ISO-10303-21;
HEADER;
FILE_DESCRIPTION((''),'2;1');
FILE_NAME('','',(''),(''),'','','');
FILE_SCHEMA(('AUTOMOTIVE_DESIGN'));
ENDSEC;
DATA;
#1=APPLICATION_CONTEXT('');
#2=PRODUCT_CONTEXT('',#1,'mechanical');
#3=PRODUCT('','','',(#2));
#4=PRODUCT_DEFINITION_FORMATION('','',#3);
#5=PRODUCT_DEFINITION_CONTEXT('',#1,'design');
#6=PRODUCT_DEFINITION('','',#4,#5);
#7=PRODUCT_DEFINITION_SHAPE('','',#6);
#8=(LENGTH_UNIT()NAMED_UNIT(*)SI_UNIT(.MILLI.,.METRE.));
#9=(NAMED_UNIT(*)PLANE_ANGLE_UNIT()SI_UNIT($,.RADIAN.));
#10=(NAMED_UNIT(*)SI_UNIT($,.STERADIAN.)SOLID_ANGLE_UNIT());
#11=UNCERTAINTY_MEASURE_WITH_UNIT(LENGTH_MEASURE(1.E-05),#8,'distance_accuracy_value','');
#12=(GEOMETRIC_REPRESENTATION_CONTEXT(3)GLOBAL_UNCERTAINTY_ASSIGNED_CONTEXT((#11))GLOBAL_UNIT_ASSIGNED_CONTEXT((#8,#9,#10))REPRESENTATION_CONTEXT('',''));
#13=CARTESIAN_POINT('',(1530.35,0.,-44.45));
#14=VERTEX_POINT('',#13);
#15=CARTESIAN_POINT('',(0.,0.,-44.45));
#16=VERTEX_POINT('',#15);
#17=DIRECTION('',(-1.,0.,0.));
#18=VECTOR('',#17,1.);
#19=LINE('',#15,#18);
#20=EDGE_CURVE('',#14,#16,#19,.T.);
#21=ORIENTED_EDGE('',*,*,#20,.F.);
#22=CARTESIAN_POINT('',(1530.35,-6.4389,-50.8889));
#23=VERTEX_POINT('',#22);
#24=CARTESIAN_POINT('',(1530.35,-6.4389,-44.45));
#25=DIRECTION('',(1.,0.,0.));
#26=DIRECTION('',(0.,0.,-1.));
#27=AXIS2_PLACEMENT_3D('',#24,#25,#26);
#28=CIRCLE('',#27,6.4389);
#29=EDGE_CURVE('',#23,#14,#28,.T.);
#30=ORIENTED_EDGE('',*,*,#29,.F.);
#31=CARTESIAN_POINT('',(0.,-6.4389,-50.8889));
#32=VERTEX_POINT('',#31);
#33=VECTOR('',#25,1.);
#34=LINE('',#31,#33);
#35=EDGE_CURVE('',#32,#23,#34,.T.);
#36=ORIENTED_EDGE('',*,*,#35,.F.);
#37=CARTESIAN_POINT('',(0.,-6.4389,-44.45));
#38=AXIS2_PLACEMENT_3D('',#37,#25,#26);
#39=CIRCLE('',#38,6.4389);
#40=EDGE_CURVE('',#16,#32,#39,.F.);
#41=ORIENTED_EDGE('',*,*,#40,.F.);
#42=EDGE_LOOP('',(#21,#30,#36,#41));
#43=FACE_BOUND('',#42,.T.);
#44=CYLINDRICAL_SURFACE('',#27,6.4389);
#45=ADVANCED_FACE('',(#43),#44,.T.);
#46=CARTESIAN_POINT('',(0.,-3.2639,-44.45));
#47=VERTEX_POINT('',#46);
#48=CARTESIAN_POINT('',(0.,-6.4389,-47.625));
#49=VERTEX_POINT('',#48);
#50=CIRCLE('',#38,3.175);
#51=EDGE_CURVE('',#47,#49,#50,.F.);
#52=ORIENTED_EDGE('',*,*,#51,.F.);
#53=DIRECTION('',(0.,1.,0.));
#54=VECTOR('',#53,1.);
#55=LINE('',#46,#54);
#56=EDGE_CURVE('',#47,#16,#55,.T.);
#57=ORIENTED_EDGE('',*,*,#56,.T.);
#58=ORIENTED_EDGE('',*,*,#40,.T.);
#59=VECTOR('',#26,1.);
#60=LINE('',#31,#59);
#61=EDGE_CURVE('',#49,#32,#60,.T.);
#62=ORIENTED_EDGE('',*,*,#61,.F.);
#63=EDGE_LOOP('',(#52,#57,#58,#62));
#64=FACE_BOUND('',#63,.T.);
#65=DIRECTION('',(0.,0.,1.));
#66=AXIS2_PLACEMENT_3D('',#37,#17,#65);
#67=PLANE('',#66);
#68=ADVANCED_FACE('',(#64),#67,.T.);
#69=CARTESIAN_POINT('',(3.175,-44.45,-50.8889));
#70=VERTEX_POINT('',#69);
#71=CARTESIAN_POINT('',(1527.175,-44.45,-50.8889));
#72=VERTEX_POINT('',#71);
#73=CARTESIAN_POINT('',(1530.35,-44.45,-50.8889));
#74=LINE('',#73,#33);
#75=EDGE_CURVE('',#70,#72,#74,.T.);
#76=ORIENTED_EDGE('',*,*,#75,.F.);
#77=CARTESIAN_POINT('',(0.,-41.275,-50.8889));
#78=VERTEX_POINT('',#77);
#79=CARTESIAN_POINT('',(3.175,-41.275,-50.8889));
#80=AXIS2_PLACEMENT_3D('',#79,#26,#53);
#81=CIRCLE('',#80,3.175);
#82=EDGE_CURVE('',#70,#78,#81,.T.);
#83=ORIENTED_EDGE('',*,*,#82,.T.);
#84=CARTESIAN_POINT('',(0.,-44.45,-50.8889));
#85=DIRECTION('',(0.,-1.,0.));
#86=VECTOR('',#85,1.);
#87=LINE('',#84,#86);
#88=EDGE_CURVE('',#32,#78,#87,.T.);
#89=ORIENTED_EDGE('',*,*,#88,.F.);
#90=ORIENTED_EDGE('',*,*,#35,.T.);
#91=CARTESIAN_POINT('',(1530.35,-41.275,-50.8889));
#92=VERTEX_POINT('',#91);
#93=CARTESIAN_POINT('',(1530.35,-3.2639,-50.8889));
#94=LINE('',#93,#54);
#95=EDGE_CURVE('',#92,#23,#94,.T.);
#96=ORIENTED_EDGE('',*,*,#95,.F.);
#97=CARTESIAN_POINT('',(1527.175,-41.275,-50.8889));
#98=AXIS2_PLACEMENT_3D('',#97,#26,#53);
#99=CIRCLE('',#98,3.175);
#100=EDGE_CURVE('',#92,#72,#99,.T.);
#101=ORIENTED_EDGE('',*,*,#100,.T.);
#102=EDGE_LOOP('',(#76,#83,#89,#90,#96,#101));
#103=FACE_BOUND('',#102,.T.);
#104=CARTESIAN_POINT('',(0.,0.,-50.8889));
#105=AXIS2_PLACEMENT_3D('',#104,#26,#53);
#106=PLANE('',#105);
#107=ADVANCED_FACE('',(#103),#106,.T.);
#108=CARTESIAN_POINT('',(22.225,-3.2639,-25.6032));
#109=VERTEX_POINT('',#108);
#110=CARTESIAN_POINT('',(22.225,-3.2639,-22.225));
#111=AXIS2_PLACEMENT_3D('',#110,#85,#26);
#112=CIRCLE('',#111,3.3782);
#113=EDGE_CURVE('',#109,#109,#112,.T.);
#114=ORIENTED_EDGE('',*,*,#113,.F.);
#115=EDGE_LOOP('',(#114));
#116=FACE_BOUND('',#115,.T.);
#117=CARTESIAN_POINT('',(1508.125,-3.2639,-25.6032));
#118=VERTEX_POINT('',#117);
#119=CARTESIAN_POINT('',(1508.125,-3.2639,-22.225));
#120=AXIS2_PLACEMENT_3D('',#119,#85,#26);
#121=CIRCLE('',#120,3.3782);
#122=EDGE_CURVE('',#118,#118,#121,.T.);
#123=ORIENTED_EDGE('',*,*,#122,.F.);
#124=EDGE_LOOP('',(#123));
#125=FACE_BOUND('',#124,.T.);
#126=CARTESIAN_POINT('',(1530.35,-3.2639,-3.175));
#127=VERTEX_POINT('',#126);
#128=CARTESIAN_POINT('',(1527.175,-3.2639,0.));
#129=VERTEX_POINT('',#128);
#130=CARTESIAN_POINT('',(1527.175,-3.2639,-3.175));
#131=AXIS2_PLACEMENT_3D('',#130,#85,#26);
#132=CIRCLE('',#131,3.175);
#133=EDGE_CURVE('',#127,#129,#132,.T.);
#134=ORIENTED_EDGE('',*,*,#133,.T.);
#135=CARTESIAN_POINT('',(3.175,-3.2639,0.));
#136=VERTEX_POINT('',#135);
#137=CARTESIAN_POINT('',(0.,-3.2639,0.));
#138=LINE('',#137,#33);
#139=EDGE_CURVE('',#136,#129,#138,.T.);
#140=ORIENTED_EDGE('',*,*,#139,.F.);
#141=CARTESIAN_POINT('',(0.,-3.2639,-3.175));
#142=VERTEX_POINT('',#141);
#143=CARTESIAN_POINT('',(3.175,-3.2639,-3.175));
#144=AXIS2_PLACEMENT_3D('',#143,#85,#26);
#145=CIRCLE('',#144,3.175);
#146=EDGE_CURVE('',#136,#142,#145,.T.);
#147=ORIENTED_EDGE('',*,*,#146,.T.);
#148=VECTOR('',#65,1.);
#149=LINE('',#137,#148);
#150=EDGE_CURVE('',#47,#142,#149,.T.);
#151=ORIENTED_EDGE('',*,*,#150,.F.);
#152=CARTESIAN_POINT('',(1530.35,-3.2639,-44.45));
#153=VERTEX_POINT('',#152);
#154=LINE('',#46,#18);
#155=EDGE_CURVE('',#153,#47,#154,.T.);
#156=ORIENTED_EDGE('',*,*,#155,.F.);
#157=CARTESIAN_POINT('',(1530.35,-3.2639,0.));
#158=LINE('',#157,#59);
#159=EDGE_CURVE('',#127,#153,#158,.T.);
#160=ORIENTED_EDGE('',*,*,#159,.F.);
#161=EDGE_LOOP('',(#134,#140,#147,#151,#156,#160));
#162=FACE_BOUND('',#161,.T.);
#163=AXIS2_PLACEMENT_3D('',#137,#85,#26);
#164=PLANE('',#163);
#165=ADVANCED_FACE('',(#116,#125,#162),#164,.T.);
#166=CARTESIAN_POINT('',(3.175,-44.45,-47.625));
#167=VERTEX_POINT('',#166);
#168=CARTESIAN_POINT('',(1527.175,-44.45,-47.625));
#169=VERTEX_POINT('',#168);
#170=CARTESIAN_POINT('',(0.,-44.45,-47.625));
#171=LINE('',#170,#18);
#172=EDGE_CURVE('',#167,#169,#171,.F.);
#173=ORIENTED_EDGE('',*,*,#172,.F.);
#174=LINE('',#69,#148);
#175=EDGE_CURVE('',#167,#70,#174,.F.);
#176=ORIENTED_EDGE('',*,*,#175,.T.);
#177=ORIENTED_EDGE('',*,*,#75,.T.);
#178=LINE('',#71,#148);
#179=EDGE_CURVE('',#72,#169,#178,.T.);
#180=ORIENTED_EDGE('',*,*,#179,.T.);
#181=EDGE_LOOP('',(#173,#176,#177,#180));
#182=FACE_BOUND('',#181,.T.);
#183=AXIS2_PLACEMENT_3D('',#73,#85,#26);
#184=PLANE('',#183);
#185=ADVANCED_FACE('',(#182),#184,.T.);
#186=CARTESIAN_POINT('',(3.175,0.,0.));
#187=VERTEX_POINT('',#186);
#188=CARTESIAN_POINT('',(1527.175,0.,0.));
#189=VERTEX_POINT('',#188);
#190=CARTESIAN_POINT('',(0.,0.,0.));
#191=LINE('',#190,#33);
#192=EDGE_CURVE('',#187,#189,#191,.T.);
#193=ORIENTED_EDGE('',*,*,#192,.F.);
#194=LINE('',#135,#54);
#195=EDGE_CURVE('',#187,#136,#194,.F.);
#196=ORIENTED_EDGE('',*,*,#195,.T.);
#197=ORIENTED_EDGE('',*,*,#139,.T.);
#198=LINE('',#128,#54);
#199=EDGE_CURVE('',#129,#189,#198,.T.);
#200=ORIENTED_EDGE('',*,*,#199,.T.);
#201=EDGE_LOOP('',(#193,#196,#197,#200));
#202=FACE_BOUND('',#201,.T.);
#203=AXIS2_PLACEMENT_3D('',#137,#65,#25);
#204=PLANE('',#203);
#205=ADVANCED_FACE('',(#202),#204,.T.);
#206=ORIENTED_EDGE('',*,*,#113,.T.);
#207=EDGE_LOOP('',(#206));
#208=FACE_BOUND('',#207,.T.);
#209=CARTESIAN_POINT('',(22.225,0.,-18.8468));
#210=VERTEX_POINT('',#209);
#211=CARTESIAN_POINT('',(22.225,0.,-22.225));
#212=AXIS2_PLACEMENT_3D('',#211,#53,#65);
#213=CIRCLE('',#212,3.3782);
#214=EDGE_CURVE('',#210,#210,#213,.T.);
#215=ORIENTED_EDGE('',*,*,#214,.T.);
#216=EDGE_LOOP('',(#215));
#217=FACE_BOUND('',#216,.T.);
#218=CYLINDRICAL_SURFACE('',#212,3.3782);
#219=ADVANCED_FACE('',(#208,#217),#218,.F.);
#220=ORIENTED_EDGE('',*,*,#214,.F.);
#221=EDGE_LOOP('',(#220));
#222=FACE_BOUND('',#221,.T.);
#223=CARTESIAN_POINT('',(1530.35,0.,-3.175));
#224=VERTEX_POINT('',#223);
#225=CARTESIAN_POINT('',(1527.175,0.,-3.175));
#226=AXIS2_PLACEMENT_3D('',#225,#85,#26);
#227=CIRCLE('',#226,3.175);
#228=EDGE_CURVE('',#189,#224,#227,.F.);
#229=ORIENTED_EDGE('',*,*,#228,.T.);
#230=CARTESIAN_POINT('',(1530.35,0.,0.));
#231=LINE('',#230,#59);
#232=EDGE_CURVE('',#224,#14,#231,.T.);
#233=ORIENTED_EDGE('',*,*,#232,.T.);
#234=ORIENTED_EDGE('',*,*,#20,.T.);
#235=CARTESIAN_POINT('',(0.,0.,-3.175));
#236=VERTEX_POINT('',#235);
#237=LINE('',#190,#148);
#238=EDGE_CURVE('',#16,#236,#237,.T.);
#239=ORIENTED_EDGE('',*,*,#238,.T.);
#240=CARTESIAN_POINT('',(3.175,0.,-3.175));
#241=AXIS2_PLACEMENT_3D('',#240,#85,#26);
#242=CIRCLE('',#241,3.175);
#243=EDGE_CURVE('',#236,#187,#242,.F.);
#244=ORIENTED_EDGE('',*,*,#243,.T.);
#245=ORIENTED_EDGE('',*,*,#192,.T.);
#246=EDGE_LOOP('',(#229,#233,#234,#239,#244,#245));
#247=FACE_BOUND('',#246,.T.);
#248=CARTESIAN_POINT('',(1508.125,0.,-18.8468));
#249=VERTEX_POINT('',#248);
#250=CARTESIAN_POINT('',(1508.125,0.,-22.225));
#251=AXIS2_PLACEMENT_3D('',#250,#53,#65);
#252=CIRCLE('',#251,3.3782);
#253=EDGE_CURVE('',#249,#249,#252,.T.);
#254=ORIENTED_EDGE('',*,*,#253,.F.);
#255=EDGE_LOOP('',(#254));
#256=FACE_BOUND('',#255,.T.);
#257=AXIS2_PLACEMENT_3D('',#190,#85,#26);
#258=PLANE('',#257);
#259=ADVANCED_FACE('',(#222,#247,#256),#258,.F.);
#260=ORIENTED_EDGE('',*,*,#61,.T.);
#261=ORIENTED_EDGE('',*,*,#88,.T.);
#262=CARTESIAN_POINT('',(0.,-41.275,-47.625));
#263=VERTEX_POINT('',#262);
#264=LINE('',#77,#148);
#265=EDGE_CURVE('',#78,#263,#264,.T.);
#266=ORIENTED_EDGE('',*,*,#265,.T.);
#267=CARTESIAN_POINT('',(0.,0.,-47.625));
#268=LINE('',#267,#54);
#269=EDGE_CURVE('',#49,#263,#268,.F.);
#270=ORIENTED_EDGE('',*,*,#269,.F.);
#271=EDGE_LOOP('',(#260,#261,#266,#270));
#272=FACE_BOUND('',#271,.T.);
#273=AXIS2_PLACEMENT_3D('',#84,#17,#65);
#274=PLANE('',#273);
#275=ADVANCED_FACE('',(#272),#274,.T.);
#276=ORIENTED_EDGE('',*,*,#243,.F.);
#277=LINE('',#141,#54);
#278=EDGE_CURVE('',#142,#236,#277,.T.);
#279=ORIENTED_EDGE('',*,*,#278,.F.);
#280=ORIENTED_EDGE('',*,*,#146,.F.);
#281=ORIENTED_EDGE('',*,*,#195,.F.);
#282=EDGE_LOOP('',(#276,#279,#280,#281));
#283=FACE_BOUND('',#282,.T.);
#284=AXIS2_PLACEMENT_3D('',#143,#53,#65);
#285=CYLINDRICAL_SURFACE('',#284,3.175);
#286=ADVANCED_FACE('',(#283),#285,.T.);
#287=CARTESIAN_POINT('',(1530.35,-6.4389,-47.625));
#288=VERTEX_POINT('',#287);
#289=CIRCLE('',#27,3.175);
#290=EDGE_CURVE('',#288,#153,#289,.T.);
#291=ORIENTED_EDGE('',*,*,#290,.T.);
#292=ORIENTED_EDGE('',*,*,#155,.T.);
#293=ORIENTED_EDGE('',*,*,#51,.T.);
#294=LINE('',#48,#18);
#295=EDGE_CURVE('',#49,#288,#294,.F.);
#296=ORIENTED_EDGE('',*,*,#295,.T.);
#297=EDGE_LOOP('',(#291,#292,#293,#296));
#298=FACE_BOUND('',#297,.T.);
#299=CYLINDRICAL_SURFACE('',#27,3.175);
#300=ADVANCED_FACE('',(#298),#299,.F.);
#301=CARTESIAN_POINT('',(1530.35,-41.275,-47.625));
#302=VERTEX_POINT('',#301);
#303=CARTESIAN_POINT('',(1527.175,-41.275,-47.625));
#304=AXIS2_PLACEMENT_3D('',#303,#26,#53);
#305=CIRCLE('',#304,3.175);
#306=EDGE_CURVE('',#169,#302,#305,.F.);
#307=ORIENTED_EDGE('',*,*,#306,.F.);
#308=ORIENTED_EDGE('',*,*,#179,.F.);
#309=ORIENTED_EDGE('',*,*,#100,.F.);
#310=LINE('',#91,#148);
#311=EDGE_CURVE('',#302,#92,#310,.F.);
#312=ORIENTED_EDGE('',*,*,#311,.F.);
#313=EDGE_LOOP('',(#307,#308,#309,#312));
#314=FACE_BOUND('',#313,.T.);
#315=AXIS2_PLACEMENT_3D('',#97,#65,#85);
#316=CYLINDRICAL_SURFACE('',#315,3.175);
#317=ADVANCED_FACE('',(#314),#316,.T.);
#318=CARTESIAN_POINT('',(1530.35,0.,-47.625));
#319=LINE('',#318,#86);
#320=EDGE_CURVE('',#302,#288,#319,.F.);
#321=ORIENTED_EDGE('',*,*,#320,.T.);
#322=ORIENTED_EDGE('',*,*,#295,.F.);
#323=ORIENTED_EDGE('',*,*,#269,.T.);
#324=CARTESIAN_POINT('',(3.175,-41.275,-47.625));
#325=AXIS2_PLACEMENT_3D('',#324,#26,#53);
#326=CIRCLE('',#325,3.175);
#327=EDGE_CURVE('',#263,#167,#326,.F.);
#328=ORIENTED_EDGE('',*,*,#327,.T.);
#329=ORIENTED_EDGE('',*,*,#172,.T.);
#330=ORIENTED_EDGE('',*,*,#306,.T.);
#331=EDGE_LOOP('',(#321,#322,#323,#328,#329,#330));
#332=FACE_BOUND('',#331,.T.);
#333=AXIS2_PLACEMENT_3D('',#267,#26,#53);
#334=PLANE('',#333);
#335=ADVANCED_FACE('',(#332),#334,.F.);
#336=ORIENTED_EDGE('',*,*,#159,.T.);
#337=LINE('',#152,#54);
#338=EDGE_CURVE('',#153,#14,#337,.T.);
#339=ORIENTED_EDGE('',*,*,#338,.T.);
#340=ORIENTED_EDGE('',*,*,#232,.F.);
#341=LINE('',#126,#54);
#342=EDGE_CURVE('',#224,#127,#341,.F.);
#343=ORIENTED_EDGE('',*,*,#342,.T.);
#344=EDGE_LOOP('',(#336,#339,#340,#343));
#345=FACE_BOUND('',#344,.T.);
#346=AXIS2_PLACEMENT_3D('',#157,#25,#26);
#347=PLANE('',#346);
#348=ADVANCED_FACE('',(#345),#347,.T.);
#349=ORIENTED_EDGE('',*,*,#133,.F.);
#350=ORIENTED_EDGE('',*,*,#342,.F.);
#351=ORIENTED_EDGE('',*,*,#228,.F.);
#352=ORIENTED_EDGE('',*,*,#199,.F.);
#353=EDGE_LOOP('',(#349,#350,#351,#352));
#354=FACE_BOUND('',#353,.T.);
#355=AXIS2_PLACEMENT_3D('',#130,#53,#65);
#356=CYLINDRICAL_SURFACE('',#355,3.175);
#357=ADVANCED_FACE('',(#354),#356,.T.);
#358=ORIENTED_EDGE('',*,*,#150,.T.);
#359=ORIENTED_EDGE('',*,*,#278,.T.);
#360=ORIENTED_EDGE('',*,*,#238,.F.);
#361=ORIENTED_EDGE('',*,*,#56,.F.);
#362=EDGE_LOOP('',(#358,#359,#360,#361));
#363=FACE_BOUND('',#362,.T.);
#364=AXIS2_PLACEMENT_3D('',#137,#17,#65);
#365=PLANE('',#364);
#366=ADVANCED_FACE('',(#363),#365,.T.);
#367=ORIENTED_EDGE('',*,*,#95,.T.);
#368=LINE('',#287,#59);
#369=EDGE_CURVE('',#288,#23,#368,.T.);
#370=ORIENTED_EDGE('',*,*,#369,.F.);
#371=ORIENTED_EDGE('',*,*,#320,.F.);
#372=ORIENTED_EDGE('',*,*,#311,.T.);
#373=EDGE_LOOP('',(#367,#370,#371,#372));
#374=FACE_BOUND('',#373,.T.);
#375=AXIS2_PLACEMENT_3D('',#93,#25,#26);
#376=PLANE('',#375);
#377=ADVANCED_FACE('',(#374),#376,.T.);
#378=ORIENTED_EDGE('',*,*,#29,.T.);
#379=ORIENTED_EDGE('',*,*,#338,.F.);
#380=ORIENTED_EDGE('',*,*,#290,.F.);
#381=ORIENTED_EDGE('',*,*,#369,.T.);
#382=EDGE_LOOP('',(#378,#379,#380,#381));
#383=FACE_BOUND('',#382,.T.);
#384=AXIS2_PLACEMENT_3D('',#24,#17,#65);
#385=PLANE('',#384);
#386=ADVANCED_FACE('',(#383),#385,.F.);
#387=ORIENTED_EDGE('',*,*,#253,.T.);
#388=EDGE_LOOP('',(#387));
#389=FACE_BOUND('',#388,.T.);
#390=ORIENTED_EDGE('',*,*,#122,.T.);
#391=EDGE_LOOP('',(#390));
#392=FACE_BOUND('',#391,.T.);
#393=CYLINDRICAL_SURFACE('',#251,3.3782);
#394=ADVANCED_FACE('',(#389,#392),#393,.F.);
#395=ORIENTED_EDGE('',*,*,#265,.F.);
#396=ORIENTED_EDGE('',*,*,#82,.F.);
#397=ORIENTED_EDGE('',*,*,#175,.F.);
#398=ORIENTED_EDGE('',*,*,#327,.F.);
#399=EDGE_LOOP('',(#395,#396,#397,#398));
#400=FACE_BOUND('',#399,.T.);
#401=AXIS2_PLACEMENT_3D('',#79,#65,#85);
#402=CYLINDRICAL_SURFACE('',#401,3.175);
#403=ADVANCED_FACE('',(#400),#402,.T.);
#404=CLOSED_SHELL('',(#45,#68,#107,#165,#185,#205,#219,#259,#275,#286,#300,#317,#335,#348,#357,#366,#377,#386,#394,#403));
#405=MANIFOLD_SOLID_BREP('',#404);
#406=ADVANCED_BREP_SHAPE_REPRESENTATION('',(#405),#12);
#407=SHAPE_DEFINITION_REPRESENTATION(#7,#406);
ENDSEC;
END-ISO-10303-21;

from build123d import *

# Parameters (mm, degrees)
SKETCH3_W               = 1530.35
SKETCH3_H               = 44.45
BASE_FLANGE1_DEPTH      = 3.2639
EDGE_FLANGE1_DEPTH      = 1530.35
F_1_4_CLEARANCE_HOLE1_D = 6.7564
FILLET1_R               = 3.175


# Sheet-metal steps are written as plain solids
with BuildPart() as part:
    # Sketch3 → Base-Flange1 (new body)
    with BuildSketch(Plane(origin=(0, 0, 0), x_dir=(1, 0, 0), z_dir=(0, 1, 0))):
        with Locations((765.175, 22.225)):
            Rectangle(SKETCH3_W, SKETCH3_H)
    extrude(amount=-BASE_FLANGE1_DEPTH)

    # Edge-Flange1 section (across the edge) → Edge-Flange1 (add)
    with BuildSketch(Plane(origin=(0, -3.2639, -47.625), x_dir=(0, 0, 1), z_dir=(1, 0, 0))):
        with BuildLine():
            Line((-3.2639, 3.175), (-3.2639, 41.1861))
            Line((-3.2639, 41.1861), (0, 41.1861))
            Line((0, 41.1861), (0, 3.175))
            ThreePointArc((0, 3.175), (0.92993597, 0.92993597), (3.175, 0))
            Line((3.175, 0), (3.175, -3.2639))
            ThreePointArc((3.175, -3.2639), (-1.377989853, -1.377989853), (-3.2639, 3.175))
        make_face()
    extrude(amount=EDGE_FLANGE1_DEPTH)

    # 1/4 Clearance Hole1 (through all)
    with Locations(Plane(origin=(0, 0, 0), x_dir=(1, 0, 0), z_dir=(0, 1, 0))):
        with Locations((22.225, 22.225), (1508.125, 22.225)):
            Hole(F_1_4_CLEARANCE_HOLE1_D / 2)

    # Fillet1
    fillet1_edges = [part.edges().sort_by_distance(p)[0] for p in [
        (0, -44.45, -49.25695),
        (1530.35, -44.45, -49.25695),
        (1530.35, -1.63195, 0),
        (0, -1.63195, 0),
    ]]
    fillet(fillet1_edges, radius=FILLET1_R)


solid = part.part
